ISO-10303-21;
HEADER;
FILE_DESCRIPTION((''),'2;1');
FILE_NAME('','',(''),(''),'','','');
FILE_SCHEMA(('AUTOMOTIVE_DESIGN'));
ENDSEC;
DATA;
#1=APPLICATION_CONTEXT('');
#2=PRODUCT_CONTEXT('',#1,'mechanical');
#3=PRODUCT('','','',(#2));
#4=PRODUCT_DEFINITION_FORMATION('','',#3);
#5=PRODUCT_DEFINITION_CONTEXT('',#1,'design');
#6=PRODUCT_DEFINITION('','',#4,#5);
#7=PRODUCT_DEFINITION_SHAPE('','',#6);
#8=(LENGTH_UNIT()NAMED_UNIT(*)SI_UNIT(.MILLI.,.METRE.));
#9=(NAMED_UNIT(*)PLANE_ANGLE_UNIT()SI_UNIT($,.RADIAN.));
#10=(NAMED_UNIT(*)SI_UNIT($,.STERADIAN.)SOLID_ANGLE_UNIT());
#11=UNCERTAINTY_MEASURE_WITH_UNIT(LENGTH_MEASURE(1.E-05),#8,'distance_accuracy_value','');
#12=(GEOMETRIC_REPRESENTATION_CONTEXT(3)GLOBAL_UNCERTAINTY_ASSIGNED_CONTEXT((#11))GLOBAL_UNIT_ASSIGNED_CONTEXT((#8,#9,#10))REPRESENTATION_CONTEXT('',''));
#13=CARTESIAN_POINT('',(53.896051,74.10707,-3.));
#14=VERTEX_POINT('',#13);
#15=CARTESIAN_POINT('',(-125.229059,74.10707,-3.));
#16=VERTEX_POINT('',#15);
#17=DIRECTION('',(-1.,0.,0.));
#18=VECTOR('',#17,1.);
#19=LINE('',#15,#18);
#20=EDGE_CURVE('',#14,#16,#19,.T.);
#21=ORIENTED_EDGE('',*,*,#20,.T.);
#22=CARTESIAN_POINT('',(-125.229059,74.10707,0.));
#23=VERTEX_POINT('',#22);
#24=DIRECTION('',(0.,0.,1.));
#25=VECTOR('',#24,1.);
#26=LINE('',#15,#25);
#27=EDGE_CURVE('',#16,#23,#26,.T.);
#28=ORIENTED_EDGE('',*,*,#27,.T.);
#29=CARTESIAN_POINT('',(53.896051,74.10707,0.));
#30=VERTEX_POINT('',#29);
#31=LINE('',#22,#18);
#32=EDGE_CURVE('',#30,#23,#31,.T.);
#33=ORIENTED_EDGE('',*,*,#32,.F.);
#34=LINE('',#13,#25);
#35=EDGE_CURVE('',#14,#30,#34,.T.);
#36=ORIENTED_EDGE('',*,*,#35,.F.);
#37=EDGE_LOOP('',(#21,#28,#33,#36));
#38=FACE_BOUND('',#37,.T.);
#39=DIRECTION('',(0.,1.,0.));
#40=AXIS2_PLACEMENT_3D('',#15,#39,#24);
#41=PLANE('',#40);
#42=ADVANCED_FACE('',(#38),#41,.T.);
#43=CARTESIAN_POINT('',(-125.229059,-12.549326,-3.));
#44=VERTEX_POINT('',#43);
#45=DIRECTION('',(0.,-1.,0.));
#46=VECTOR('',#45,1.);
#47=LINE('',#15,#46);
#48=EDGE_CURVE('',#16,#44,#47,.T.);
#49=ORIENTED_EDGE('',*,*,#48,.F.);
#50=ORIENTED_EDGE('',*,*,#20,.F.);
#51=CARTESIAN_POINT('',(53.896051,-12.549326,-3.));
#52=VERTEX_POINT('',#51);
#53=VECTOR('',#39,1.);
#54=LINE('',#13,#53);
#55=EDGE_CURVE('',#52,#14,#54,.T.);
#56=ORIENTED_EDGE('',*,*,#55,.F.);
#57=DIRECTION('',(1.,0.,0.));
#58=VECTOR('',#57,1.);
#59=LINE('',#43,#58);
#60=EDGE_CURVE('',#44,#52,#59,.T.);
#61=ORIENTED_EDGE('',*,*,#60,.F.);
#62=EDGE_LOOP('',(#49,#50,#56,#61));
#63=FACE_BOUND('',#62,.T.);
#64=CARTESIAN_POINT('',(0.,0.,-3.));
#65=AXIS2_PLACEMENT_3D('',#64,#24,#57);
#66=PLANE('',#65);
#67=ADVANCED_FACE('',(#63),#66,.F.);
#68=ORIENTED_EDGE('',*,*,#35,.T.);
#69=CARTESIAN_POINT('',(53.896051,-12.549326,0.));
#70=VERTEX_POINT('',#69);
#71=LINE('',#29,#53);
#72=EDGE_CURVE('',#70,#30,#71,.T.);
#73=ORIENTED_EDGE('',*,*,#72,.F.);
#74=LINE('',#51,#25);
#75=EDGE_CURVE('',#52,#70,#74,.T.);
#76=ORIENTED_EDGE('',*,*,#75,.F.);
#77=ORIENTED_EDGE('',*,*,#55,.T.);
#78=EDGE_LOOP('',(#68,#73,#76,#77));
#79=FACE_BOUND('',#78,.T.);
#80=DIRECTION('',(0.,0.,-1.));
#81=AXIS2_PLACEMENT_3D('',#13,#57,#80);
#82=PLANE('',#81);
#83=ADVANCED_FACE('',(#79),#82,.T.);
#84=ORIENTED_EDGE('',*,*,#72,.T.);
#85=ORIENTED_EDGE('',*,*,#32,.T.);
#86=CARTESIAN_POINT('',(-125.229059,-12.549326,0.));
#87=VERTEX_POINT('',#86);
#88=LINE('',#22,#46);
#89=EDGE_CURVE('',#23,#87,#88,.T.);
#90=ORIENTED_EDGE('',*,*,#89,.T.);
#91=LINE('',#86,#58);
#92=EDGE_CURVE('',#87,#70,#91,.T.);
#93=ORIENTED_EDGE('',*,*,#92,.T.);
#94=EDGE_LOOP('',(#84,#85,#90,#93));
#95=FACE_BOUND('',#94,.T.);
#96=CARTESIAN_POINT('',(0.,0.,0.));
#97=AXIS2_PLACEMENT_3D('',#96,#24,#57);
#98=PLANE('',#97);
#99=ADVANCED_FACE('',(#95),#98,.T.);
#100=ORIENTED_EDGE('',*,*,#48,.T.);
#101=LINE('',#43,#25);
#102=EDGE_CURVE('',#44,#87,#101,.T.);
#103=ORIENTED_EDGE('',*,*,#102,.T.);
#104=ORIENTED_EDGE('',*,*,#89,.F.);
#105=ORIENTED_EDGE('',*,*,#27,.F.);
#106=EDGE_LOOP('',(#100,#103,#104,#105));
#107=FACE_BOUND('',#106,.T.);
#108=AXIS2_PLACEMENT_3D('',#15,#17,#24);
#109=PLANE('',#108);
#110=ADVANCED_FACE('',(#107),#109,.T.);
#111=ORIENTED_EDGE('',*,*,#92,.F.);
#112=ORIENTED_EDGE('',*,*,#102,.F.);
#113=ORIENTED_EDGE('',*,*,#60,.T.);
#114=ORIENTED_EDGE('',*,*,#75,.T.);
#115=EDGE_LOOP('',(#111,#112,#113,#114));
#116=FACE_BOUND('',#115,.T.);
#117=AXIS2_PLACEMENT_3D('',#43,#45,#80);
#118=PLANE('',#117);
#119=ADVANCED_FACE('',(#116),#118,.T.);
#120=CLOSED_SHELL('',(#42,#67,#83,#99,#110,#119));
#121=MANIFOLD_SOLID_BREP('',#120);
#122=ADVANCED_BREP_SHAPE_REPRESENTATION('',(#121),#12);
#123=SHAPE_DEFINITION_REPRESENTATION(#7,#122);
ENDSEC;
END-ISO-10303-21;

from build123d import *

# Parameters (mm, degrees)
SKETCH8_W          = 179.125109703
SKETCH8_H          = 86.656395254
BASE_FLANGE2_DEPTH = 3


# Sheet-metal steps are written as plain solids
with BuildPart() as part:
    # Sketch8 → Base-Flange2 (new body)
    with BuildSketch(Plane.XY):
        with Locations((-35.666504145, 30.778872095)):
            Rectangle(SKETCH8_W, SKETCH8_H)
    extrude(amount=-BASE_FLANGE2_DEPTH)


solid = part.part
